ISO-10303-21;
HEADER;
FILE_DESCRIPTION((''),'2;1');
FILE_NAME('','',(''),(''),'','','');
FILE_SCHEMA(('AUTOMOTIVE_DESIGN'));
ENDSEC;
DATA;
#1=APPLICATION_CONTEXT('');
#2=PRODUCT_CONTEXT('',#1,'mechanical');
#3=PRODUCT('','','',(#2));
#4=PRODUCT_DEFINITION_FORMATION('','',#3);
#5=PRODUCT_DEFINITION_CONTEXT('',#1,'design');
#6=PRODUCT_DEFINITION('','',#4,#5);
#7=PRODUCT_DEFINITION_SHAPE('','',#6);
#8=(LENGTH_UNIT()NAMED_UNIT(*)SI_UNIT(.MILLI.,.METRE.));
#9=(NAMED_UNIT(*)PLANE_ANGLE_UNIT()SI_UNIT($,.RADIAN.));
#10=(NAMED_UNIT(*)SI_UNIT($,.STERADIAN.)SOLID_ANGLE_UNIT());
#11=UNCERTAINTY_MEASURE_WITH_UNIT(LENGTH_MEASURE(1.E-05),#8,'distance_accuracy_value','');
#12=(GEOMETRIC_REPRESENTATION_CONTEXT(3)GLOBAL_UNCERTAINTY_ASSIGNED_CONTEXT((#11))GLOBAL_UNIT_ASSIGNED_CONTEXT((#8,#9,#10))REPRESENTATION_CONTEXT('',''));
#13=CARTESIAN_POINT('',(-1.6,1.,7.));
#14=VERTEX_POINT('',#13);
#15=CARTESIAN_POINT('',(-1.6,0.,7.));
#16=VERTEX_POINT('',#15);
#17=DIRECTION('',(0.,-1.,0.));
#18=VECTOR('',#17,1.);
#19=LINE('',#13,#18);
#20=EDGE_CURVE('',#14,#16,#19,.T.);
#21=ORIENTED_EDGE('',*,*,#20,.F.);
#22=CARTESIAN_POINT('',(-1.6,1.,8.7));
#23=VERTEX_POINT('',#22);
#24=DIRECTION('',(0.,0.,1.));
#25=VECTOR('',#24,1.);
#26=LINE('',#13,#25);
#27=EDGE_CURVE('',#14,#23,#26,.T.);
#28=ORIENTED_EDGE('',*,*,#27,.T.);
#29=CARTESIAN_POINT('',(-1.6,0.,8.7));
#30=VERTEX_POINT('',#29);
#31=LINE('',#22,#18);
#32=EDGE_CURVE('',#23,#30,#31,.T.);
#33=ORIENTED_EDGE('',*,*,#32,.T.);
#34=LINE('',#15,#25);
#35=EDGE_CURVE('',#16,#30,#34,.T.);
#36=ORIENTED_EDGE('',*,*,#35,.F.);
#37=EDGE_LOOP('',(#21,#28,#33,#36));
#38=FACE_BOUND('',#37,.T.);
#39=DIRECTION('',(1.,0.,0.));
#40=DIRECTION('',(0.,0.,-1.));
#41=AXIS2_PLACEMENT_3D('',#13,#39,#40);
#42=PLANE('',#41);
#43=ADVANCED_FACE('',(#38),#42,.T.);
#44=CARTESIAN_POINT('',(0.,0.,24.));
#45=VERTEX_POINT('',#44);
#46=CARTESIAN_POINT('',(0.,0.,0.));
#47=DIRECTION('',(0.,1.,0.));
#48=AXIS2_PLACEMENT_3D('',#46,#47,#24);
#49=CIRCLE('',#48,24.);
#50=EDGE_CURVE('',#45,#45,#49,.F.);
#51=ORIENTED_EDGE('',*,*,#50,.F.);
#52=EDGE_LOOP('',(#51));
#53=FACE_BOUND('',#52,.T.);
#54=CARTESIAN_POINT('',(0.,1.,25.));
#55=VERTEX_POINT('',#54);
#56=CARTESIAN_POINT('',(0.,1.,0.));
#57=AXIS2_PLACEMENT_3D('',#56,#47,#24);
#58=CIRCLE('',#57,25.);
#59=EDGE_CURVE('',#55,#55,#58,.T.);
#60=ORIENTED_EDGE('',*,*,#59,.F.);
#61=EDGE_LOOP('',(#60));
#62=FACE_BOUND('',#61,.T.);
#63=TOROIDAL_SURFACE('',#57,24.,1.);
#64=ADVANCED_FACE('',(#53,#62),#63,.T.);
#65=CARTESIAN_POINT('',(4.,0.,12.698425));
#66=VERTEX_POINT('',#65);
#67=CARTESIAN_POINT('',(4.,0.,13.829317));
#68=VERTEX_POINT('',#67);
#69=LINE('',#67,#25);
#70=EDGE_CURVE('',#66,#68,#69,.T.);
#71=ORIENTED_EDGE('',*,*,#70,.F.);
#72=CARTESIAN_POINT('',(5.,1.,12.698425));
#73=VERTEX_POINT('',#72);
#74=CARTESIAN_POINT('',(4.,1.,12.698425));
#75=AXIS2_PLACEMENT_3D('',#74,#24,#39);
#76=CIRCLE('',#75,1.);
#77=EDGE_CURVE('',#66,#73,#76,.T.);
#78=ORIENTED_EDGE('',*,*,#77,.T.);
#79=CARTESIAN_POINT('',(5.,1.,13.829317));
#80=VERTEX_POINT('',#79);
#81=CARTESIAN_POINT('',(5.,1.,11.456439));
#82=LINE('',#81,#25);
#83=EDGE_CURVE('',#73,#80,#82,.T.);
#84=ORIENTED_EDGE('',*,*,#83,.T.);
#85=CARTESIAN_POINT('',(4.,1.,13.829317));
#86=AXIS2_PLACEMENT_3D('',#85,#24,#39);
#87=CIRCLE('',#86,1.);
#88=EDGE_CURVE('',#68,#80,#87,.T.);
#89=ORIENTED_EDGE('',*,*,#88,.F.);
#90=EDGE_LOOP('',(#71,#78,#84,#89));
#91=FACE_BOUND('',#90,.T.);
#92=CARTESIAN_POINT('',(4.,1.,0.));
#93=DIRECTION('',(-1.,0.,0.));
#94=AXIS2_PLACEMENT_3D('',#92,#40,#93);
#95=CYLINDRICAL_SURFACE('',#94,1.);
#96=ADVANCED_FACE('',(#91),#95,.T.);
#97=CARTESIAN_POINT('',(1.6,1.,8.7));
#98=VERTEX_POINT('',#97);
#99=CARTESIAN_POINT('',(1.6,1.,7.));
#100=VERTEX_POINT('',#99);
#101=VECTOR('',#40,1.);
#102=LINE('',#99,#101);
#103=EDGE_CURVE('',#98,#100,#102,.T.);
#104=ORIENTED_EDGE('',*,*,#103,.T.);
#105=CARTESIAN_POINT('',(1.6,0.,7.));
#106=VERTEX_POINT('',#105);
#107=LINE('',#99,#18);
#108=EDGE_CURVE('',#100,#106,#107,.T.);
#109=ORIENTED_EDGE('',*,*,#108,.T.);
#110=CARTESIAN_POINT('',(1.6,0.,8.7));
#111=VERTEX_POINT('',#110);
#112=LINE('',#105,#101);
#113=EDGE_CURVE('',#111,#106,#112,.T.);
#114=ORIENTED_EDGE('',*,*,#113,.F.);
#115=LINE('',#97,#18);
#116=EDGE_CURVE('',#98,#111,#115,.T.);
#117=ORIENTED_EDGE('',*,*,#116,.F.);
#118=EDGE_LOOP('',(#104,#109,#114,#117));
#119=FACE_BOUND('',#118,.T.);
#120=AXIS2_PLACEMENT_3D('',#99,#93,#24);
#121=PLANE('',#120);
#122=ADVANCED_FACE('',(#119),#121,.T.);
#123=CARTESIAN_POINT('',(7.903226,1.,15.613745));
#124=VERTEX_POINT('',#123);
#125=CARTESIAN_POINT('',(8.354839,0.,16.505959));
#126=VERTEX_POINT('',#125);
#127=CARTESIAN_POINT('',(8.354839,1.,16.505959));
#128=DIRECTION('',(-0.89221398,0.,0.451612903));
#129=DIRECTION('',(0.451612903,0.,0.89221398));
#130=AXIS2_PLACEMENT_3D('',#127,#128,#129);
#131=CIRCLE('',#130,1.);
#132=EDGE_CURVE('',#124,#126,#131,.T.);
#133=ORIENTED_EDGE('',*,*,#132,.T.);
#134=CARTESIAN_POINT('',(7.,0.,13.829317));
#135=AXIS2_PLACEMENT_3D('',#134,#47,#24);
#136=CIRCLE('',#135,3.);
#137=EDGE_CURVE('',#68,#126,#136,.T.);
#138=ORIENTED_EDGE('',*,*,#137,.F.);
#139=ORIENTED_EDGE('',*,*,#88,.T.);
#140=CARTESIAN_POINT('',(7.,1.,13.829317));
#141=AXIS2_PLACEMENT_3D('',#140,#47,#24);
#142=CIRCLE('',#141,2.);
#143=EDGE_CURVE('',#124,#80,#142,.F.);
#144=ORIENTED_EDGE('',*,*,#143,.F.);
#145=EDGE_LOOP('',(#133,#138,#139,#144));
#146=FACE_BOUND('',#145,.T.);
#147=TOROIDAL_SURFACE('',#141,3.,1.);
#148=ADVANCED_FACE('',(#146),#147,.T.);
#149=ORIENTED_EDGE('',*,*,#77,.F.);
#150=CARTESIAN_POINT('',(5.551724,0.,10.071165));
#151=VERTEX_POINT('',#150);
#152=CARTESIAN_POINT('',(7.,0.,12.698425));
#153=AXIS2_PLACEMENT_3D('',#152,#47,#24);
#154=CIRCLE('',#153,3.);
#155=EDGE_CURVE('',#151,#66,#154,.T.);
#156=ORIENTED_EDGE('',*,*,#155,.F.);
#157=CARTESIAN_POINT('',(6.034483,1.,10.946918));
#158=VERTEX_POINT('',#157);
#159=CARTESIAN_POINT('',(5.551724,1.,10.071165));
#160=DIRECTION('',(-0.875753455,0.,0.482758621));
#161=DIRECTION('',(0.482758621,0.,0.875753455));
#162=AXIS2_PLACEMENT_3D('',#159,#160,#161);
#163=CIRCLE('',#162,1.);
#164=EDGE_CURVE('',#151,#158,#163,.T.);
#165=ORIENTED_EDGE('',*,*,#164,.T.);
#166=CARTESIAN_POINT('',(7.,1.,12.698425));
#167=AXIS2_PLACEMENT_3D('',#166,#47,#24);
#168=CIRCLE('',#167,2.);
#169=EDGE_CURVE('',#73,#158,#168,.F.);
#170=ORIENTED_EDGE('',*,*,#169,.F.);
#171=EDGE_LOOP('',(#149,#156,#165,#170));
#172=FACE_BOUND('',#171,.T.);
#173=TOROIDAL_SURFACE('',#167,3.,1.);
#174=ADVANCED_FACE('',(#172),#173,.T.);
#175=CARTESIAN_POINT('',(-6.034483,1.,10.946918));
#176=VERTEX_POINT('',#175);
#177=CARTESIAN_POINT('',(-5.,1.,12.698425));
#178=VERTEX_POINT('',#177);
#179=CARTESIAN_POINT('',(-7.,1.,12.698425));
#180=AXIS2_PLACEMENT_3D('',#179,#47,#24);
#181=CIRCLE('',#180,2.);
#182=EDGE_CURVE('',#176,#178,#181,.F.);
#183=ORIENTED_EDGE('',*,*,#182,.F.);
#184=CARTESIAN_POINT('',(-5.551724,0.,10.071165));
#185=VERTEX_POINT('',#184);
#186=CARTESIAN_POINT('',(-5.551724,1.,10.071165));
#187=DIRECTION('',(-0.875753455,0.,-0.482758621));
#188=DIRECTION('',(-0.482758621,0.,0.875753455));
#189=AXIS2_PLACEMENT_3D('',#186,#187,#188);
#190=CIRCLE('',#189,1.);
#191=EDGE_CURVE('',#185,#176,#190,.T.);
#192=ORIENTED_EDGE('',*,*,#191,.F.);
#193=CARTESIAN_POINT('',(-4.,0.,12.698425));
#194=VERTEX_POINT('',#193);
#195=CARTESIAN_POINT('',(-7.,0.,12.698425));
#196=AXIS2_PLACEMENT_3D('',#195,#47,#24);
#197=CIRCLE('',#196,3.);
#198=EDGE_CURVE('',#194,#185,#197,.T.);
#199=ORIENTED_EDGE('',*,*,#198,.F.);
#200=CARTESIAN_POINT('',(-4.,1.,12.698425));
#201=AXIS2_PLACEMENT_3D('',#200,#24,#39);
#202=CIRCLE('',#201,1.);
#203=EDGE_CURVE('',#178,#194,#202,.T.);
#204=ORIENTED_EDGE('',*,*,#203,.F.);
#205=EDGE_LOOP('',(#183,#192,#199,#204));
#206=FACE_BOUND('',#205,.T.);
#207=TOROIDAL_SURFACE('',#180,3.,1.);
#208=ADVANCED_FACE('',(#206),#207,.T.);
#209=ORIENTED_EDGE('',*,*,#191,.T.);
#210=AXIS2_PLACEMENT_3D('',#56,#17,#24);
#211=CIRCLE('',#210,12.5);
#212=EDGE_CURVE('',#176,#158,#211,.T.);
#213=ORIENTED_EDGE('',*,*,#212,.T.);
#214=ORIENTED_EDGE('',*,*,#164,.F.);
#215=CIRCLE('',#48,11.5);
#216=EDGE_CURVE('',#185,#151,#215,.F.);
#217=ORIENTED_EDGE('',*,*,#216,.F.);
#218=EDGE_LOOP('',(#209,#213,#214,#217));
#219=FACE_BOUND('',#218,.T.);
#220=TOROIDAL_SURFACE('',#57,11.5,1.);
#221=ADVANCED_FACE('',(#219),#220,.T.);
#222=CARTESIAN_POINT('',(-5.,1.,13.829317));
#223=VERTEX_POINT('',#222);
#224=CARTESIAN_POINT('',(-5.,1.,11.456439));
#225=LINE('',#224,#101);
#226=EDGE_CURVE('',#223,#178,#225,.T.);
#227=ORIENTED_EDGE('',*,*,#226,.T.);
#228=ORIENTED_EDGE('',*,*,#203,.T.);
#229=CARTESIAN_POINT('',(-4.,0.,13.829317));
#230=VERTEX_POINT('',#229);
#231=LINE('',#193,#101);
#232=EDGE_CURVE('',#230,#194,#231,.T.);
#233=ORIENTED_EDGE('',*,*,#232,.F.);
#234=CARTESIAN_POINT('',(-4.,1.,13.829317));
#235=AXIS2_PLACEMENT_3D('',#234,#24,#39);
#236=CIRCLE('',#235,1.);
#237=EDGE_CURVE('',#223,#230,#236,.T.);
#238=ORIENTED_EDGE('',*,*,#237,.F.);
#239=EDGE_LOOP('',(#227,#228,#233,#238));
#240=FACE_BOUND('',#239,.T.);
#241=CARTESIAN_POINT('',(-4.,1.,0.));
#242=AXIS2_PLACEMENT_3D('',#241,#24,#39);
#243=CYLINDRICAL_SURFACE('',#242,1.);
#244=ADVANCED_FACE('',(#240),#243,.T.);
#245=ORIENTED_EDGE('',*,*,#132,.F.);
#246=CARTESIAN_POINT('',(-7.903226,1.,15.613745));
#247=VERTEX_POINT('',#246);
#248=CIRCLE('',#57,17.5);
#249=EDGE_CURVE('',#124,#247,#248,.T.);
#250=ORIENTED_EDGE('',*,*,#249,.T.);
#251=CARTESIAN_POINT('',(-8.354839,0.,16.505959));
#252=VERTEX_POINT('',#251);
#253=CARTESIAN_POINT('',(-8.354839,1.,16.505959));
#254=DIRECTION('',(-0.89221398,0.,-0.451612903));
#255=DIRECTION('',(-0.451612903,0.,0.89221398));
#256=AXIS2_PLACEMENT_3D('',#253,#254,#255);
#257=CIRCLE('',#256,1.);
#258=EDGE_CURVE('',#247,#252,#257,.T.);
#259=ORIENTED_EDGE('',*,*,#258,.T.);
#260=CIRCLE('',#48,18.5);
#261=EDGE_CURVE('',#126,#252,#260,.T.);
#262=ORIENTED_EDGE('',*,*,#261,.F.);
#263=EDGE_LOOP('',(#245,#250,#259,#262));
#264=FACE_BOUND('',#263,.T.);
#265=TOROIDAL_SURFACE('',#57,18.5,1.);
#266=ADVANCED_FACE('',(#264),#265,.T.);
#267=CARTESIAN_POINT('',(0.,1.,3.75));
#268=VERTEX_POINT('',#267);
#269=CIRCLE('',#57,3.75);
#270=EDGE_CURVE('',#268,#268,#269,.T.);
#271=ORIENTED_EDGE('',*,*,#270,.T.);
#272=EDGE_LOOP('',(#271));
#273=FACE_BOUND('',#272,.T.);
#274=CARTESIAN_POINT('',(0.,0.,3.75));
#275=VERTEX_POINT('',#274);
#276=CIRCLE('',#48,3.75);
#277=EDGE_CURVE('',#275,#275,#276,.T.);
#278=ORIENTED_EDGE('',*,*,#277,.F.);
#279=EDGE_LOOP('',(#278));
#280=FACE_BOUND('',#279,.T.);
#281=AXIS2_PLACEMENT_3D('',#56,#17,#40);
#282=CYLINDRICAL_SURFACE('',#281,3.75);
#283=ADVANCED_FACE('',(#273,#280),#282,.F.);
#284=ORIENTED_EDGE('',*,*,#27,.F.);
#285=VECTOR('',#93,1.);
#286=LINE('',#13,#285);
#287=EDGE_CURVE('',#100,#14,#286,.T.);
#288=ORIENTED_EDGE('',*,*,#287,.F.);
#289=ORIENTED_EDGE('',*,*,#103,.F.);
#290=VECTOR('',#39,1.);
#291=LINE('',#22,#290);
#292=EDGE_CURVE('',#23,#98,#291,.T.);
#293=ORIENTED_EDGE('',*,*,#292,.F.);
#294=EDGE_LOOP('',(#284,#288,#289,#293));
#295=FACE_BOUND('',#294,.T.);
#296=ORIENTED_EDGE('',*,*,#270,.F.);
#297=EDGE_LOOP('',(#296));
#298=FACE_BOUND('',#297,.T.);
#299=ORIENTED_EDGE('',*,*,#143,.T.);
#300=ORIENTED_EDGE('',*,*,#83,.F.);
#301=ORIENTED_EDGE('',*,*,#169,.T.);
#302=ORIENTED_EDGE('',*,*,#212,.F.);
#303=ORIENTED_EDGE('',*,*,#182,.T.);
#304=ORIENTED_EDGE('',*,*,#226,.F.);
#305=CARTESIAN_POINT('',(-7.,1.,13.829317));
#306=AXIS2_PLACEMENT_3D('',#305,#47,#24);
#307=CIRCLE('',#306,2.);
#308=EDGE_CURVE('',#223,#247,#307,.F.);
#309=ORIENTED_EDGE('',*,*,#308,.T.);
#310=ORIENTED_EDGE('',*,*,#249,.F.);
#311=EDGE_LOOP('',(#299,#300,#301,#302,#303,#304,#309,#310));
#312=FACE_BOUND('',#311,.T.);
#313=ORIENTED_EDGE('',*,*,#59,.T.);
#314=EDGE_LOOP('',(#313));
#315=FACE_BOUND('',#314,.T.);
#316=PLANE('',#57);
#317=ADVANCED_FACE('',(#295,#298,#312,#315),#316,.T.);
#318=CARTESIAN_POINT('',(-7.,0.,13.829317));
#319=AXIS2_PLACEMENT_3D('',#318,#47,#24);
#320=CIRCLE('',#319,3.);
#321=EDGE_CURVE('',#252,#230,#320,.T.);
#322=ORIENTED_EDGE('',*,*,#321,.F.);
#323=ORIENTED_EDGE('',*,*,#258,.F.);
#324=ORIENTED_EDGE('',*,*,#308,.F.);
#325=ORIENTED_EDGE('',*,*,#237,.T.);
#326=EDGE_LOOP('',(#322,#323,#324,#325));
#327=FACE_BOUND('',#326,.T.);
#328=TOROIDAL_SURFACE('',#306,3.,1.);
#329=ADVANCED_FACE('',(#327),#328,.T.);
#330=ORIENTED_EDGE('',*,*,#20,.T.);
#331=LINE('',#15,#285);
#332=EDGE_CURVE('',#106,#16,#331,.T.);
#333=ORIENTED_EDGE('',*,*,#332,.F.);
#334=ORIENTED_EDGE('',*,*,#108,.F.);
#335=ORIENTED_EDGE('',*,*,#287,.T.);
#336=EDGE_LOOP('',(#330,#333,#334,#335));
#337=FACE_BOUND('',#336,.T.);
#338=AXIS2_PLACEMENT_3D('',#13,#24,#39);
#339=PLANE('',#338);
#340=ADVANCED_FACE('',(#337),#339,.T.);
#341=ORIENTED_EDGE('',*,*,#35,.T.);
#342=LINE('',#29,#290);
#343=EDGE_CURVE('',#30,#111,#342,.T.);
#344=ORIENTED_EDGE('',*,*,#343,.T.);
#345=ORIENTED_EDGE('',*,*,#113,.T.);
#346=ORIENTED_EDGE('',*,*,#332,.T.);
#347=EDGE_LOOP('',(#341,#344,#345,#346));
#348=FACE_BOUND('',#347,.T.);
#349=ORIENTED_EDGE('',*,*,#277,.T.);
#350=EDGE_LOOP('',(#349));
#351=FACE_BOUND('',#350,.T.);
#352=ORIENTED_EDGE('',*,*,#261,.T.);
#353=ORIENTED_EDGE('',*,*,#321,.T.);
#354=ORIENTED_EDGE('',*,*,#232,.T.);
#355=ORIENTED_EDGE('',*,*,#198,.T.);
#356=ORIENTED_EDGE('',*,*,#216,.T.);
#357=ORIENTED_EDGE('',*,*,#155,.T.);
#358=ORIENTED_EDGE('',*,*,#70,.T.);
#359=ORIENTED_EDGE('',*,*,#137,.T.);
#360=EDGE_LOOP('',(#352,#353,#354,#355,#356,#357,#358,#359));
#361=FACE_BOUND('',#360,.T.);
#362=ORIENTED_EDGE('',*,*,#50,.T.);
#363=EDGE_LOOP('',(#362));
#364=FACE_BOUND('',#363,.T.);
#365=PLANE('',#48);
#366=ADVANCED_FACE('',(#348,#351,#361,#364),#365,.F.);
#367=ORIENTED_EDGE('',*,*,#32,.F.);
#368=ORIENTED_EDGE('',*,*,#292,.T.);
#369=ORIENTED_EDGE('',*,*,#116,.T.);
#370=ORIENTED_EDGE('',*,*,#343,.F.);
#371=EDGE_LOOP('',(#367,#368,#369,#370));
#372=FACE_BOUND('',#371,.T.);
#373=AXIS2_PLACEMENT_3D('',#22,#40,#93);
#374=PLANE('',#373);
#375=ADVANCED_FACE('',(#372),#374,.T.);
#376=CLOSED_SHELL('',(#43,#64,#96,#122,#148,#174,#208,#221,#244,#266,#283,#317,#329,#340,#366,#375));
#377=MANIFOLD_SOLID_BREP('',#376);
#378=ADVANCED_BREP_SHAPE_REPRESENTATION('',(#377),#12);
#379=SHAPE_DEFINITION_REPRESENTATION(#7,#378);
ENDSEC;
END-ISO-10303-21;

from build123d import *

# Parameters (mm, degrees)
SKETCH1_R           = 25
SKETCH1_R_2         = 3.75
SKETCH1_W           = 3.2
SKETCH1_H           = 1.7
BOSS_EXTRUDE1_DEPTH = 1
FILLET1_R           = 2
FILLET2_R           = 1


with BuildPart() as part:
    # Sketch1 → Boss-Extrude1 (new body)
    with BuildSketch(Plane(origin=(0, 0, 0), x_dir=(1, 0, 0), z_dir=(0, 1, 0))):
        with Locations(Location((0, 0, 0), (0, 0, 270))):
            Circle(SKETCH1_R)
        with Locations(Location((0, 0, 0), (0, 0, 270))):
            Circle(SKETCH1_R_2, mode=Mode.SUBTRACT)
        with BuildLine():
            Line((-5, -11.456439237), (-5, -16.770509831))
            ThreePointArc((-5, -16.770509831), (0, 17.5), (5, -16.770509831))
            Line((5, -16.770509831), (5, -11.456439237))
            ThreePointArc((5, -11.456439237), (0, 12.5), (-5, -11.456439237))
        make_face(mode=Mode.SUBTRACT)
        with Locations((0, -7.85)):
            Rectangle(SKETCH1_W, SKETCH1_H, mode=Mode.SUBTRACT)
    extrude(amount=BOSS_EXTRUDE1_DEPTH)

    # Fillet1
    fillet1_edges = [part.edges().sort_by_distance(p)[0] for p in [
        (-5, 0.5, 11.456439237),
        (5, 0.5, 11.456439237),
        (5, 0.5, 16.770509831),
        (-5, 0.5, 16.770509831),
    ]]
    fillet(fillet1_edges, radius=FILLET1_R)

    # Fillet2
    fillet2_edges = [part.edges().sort_by_distance(p)[0] for p in [
        (5.952730124, 0, 15.533202189),
        (5, 0, 13.263870893),
        (5.277932277, 0, 11.681329844),
        (0, 0, -12.5),
        (-5.277932277, 0, 11.681329844),
        (-5, 0, 13.263870893),
        (-5.952730124, 0, 15.533202189),
        (0, 0, -17.5),
        (0, 0, -25),
    ]]
    fillet(fillet2_edges, radius=FILLET2_R - 0.0001)  # a hair under: the kernel refuses the full size


solid = part.part
